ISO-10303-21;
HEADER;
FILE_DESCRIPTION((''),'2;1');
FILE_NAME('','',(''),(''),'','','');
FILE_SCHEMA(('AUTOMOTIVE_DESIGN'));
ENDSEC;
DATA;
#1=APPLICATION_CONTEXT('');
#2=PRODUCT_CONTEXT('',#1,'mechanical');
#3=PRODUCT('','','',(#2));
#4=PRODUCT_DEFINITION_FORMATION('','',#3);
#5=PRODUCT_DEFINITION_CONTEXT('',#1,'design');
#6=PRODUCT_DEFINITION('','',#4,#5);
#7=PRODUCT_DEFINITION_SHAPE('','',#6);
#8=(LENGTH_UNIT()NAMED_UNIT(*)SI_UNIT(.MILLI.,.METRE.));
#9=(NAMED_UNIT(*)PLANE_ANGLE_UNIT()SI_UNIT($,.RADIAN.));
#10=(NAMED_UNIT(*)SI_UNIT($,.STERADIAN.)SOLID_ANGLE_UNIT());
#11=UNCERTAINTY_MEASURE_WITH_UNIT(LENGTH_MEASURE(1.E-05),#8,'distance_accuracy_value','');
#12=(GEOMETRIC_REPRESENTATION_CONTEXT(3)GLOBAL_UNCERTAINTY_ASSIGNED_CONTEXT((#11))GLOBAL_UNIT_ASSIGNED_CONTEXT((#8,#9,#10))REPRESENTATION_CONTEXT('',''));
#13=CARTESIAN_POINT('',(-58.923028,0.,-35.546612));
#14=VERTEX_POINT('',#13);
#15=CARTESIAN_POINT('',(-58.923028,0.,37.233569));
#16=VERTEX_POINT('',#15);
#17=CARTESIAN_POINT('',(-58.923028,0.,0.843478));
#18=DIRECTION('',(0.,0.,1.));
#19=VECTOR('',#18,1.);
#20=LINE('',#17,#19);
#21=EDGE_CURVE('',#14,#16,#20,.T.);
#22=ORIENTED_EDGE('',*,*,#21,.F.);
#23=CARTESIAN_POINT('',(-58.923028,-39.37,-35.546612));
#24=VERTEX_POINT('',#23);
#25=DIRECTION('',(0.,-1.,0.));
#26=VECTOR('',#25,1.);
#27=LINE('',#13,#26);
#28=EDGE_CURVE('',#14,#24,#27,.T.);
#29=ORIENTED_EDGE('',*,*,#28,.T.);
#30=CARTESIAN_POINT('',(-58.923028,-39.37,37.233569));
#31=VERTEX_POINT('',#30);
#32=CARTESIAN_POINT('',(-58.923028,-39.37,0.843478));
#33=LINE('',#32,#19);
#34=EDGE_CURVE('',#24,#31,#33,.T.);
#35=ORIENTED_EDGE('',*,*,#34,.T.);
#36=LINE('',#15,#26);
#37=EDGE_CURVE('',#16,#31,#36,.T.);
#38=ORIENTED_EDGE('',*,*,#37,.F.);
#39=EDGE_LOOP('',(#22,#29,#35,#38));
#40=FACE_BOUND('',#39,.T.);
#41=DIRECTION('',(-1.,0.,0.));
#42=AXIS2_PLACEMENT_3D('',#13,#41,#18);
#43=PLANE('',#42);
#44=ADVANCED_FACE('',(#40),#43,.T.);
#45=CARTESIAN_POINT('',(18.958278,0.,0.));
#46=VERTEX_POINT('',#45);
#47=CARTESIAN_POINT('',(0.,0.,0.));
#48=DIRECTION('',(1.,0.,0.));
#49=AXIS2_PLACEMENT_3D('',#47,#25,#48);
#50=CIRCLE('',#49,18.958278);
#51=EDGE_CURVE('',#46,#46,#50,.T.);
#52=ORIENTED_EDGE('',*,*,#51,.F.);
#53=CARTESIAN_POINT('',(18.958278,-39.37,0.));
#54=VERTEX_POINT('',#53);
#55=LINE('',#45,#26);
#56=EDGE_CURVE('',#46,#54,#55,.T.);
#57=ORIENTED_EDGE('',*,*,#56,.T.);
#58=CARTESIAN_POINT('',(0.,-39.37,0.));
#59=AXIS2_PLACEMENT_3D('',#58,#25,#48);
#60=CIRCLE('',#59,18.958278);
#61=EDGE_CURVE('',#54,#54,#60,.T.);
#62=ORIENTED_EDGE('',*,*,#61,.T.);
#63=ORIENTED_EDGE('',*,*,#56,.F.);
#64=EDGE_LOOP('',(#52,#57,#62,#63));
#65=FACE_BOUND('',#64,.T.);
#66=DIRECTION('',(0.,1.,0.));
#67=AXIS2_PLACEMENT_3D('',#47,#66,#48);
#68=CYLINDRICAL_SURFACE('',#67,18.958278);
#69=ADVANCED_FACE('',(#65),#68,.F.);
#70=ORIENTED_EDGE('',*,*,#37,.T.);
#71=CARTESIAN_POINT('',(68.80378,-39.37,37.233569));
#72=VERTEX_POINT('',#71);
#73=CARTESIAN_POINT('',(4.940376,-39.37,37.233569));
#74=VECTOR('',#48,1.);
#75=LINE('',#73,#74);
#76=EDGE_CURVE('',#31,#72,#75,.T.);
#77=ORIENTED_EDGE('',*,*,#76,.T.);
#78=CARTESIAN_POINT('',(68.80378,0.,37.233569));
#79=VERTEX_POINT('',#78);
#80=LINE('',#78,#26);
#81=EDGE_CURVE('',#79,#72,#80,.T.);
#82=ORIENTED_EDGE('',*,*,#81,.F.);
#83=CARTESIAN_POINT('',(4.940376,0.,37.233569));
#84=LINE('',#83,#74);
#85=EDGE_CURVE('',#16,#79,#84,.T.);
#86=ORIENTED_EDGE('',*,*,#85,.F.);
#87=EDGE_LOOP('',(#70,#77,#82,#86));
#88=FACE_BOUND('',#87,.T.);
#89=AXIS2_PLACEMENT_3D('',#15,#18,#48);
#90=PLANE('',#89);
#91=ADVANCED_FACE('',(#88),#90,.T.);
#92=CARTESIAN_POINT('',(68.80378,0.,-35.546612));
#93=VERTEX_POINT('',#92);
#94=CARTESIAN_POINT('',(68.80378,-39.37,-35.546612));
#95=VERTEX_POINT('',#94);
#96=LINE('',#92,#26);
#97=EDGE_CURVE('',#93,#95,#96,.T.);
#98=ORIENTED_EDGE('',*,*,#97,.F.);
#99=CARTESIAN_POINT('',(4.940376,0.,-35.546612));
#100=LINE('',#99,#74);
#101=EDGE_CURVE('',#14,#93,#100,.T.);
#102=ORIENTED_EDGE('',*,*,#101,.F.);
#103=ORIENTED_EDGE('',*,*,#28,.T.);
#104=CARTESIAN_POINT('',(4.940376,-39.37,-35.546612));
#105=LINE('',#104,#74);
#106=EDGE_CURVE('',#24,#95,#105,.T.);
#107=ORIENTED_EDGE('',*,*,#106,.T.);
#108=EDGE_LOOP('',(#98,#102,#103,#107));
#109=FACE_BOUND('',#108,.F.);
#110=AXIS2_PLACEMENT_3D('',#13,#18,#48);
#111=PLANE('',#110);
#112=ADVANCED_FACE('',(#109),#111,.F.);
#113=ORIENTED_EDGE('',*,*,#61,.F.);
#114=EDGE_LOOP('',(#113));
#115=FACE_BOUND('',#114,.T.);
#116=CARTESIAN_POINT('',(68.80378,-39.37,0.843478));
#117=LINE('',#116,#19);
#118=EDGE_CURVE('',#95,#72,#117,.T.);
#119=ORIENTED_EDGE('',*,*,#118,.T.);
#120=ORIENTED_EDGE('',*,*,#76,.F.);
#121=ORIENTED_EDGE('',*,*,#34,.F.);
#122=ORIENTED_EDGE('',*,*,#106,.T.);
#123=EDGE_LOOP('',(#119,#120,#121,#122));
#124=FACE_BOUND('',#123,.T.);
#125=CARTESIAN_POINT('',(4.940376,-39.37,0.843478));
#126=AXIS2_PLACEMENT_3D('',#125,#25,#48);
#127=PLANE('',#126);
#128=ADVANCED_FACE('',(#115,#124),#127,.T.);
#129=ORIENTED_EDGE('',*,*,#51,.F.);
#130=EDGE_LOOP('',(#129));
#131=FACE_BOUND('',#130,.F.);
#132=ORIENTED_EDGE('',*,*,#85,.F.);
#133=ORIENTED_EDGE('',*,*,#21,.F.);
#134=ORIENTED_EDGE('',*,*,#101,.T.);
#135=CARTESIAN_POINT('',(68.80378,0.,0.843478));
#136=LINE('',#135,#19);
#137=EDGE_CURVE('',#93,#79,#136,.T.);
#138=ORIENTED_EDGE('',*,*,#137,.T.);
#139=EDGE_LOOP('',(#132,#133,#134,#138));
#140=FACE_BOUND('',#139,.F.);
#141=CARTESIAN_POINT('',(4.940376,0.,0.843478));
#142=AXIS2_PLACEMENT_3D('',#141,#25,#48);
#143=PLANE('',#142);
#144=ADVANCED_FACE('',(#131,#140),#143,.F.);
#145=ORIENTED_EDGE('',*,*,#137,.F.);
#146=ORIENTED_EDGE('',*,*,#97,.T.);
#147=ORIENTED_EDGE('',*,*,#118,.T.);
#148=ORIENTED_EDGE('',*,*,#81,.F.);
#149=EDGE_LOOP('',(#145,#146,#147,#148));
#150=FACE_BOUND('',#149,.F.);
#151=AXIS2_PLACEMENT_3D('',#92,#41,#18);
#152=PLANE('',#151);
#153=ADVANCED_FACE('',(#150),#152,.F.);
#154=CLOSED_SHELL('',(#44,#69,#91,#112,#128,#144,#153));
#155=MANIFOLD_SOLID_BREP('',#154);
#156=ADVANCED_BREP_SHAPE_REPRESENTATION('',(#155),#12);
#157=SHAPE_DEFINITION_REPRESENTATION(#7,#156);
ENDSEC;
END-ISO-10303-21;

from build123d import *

# Parameters (mm, degrees)
F0_W     = 127.7268081903
F0_H     = 72.7801807225
F0_R     = 18.9582782215
F2_DEPTH = 39.37


# Not quite as in the source:
# - the program builds the solid bodies; features that only make, move or delete a surface that nothing else refers to are left out


with BuildPart() as f2:
    # F0 (on Front) → F2 (new body)
    with BuildSketch(Plane.XZ):
        with Locations((4.9403756857, 0.8434783667)):
            Rectangle(F0_W, F0_H)
        Circle(F0_R, mode=Mode.SUBTRACT)
    extrude(amount=F2_DEPTH)


solid = f2.part
